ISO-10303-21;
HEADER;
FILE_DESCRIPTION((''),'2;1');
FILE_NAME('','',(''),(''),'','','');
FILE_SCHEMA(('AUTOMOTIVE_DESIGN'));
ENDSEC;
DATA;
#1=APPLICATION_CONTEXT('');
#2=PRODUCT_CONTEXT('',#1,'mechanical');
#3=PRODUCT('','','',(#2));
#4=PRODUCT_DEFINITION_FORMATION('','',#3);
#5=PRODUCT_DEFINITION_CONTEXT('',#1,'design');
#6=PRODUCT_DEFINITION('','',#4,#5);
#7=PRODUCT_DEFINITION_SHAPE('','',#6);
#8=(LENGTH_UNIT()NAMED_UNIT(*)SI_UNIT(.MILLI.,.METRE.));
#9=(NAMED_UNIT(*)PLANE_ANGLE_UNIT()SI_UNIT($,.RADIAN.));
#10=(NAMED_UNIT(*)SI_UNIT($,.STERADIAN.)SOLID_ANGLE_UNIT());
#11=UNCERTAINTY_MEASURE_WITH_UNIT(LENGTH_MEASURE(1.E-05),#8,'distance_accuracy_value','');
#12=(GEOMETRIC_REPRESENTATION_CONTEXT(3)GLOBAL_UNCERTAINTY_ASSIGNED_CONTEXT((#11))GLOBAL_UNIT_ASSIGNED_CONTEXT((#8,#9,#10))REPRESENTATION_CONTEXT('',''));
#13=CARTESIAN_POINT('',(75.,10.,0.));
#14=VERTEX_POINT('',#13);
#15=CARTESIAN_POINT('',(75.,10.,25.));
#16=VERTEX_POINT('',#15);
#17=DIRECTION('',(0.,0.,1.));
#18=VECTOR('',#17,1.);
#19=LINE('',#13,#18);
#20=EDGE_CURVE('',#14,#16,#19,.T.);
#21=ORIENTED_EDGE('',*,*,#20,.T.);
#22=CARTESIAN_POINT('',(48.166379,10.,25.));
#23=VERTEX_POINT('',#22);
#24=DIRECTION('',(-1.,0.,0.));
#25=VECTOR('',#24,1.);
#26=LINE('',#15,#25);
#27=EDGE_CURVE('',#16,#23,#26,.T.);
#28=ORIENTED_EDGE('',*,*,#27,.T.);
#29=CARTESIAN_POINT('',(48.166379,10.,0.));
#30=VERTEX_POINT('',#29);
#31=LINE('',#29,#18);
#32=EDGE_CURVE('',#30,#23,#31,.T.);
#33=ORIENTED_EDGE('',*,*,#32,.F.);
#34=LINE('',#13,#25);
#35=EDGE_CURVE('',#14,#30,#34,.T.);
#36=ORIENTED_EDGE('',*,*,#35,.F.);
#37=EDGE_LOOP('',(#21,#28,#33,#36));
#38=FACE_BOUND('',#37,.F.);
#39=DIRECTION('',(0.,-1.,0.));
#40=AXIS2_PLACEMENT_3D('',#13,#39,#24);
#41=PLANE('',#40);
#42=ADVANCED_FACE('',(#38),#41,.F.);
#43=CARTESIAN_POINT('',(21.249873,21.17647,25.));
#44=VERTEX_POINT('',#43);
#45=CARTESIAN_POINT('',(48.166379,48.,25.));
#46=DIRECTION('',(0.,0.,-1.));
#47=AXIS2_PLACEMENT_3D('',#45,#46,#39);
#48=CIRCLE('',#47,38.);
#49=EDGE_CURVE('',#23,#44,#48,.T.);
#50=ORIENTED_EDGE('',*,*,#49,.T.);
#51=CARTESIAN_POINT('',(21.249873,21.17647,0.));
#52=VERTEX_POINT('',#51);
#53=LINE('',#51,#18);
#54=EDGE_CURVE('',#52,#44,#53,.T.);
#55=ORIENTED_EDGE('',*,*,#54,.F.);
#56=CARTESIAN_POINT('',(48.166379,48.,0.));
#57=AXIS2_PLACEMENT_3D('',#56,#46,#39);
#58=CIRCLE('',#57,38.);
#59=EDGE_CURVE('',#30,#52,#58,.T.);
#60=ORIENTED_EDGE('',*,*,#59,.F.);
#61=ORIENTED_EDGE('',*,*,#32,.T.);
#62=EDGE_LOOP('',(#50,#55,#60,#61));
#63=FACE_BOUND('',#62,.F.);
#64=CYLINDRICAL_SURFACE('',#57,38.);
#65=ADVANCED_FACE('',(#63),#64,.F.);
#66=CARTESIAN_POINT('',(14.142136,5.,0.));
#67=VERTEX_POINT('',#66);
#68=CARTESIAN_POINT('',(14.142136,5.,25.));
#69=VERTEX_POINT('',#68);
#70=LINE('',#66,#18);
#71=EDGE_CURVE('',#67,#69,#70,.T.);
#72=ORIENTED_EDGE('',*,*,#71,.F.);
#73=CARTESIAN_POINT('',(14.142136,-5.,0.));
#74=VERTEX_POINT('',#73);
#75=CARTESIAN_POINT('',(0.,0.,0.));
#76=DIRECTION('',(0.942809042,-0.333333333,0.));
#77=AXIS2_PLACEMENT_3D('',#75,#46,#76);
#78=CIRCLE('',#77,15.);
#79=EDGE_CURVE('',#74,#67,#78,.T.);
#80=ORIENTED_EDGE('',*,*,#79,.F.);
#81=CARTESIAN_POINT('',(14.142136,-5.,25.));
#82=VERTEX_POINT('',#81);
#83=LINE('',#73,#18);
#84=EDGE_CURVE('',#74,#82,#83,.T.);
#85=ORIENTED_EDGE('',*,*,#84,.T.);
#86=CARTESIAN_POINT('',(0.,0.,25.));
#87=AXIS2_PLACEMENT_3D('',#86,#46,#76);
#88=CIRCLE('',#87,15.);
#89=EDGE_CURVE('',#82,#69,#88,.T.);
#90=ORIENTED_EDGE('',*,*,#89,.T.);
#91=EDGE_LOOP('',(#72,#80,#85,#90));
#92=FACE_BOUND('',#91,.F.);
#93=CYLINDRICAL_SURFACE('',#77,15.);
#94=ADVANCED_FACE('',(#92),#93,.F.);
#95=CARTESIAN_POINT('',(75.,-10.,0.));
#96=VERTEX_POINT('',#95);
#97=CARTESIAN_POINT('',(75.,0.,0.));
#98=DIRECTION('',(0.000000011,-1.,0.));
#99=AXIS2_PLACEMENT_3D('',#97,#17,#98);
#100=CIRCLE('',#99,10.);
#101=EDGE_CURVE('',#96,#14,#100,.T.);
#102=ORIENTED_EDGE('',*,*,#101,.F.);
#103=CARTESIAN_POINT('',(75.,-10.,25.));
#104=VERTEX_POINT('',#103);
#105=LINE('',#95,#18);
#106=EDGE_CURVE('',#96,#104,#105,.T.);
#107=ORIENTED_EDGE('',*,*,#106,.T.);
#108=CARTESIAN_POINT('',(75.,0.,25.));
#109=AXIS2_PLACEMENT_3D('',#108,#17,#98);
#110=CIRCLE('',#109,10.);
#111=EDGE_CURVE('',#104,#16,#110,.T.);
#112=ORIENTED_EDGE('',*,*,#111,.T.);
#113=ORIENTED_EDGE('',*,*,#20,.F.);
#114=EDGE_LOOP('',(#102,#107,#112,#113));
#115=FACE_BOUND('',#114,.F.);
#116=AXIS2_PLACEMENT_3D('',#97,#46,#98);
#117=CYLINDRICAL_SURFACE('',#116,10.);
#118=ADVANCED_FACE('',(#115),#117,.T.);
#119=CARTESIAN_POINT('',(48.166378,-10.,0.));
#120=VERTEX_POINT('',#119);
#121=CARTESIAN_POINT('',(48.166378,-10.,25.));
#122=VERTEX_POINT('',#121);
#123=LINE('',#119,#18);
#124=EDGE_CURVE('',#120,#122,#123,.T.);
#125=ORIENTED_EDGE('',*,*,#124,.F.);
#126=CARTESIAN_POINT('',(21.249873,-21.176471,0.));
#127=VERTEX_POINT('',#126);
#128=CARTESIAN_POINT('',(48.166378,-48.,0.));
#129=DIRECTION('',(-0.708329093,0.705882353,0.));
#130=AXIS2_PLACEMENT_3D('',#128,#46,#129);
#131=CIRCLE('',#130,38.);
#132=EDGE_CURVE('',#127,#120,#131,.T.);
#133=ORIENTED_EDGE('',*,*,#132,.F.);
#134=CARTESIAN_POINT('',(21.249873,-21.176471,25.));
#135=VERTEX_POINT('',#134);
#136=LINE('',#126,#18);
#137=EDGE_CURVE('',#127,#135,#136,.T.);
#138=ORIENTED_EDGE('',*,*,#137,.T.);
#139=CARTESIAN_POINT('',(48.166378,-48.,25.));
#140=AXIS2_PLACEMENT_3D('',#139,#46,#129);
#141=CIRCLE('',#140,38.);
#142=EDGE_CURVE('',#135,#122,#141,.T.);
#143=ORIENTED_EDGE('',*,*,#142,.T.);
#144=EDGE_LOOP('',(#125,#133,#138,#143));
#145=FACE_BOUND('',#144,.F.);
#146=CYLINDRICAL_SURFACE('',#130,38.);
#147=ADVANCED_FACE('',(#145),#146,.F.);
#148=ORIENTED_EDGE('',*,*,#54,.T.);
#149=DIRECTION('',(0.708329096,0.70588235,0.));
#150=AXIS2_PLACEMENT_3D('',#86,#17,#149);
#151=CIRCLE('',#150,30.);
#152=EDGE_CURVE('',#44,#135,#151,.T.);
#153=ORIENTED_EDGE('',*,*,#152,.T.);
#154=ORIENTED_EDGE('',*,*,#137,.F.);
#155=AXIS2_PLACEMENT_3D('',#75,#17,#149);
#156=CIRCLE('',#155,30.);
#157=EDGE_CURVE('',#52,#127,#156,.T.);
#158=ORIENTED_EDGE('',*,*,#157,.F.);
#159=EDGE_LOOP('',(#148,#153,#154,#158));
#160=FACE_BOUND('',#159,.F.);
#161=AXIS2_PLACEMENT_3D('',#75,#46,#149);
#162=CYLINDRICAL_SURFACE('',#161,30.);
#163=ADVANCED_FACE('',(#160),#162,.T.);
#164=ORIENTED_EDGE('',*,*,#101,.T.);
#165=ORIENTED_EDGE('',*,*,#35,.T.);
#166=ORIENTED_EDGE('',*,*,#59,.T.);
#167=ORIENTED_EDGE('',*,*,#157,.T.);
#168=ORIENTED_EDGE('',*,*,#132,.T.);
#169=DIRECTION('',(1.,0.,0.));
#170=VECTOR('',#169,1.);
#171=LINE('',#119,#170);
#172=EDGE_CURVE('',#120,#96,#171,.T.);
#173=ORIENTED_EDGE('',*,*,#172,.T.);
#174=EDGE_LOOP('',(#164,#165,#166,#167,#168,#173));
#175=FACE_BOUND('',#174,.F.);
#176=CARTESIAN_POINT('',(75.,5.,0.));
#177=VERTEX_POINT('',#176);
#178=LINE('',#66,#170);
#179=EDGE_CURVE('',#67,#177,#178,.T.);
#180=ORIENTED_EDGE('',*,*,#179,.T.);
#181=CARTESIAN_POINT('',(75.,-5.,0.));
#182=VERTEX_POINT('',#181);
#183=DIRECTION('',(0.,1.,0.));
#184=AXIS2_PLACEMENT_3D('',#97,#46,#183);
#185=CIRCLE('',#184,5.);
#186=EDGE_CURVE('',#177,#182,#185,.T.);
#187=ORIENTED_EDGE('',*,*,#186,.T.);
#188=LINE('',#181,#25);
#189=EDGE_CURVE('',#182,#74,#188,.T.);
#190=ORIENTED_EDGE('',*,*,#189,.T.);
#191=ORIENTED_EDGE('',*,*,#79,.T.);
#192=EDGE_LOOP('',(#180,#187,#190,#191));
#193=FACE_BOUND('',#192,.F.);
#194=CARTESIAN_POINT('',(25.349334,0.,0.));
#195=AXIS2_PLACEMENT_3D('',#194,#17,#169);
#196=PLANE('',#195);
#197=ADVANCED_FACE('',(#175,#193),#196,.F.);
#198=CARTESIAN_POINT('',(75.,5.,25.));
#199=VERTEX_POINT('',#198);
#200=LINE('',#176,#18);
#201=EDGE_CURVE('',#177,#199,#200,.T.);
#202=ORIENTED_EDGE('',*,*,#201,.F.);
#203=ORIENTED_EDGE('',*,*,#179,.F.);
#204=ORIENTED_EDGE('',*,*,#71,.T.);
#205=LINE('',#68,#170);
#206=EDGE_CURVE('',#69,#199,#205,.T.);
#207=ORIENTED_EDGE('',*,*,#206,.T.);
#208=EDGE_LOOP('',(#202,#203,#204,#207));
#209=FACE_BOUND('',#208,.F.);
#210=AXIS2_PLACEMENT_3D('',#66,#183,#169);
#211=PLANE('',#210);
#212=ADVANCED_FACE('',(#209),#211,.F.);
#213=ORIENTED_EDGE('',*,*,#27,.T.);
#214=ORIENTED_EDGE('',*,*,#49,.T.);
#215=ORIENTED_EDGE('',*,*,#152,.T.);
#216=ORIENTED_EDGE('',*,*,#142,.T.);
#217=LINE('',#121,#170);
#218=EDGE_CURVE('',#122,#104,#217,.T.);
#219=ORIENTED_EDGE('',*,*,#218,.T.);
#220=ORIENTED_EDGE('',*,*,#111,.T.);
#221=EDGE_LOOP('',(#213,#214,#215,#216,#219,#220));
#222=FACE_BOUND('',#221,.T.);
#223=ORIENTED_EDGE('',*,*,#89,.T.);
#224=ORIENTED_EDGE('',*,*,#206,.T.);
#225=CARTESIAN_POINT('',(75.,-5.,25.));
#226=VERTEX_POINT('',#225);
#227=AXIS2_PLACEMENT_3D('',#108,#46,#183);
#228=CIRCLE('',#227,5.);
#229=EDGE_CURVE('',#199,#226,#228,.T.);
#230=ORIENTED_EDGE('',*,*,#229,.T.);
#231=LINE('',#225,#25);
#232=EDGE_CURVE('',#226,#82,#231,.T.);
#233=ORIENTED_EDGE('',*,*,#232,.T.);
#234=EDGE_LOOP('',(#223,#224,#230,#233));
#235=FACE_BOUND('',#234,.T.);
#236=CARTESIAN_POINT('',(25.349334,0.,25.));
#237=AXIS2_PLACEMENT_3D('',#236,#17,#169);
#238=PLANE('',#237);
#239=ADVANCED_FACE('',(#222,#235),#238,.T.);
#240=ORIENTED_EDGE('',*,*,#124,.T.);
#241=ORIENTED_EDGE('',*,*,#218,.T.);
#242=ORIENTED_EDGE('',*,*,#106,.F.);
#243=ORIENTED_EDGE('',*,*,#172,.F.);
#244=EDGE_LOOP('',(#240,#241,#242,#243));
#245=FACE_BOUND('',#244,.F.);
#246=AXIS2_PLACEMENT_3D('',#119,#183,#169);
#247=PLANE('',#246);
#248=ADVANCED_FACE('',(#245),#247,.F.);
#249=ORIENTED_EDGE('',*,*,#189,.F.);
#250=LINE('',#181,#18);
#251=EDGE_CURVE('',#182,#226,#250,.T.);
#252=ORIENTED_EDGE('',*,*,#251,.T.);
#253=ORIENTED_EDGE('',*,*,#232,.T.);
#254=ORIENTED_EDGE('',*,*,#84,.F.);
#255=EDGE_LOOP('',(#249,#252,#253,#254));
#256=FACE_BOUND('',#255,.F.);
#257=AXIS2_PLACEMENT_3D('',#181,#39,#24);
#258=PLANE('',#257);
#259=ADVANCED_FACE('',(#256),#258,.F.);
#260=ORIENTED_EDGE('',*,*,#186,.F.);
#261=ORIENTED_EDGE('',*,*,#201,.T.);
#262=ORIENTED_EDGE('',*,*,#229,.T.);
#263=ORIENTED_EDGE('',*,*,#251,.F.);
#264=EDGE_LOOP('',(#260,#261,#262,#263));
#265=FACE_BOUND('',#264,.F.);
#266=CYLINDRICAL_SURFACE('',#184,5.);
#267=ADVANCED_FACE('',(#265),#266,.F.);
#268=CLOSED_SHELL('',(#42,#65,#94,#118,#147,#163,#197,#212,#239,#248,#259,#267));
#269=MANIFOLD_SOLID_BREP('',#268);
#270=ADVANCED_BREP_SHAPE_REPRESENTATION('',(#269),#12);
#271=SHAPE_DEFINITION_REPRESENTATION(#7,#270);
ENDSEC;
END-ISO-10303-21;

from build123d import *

# Parameters (mm, degrees)
F1_DEPTH = 25


# Not quite as in the source:
# - ends of sketch curves that miss each other by under 0.0002 mm in the source are joined


with BuildPart() as f1:
    # F0 (on Top) → F1 (new body)
    with BuildSketch(Plane.XY):
        with BuildLine():
            ThreePointArc((48.1663785379, 9.9999997765), (33.5940436684, 12.9051702933), (21.2498728844, 21.1764704896))
            ThreePointArc((21.2498728844, 21.1764704896), (-30, 6.96e-08), (21.2498727861, -21.1764705882))
            ThreePointArc((21.2498727861, -21.1764705882), (33.5940435271, -12.9051704831), (48.1663783152, -10))
            Line((48.1663783152, -10), (75, -10))
            ThreePointArc((75, -10), (84.9999997765, 0), (75, 9.9999997765))
            Line((75, 9.9999997765), (48.1663785379, 9.9999997765))
        make_face()
        with BuildLine():
            ThreePointArc((14.1421356237, -5), (-15, 0), (14.1421356237, 5))
            Line((14.1421356237, 5), (75, 5))
            ThreePointArc((75, 5), (80, 0), (75, -5))
            Line((75, -5), (14.1421356237, -5))
        make_face(mode=Mode.SUBTRACT)
    extrude(amount=F1_DEPTH)


solid = f1.part
